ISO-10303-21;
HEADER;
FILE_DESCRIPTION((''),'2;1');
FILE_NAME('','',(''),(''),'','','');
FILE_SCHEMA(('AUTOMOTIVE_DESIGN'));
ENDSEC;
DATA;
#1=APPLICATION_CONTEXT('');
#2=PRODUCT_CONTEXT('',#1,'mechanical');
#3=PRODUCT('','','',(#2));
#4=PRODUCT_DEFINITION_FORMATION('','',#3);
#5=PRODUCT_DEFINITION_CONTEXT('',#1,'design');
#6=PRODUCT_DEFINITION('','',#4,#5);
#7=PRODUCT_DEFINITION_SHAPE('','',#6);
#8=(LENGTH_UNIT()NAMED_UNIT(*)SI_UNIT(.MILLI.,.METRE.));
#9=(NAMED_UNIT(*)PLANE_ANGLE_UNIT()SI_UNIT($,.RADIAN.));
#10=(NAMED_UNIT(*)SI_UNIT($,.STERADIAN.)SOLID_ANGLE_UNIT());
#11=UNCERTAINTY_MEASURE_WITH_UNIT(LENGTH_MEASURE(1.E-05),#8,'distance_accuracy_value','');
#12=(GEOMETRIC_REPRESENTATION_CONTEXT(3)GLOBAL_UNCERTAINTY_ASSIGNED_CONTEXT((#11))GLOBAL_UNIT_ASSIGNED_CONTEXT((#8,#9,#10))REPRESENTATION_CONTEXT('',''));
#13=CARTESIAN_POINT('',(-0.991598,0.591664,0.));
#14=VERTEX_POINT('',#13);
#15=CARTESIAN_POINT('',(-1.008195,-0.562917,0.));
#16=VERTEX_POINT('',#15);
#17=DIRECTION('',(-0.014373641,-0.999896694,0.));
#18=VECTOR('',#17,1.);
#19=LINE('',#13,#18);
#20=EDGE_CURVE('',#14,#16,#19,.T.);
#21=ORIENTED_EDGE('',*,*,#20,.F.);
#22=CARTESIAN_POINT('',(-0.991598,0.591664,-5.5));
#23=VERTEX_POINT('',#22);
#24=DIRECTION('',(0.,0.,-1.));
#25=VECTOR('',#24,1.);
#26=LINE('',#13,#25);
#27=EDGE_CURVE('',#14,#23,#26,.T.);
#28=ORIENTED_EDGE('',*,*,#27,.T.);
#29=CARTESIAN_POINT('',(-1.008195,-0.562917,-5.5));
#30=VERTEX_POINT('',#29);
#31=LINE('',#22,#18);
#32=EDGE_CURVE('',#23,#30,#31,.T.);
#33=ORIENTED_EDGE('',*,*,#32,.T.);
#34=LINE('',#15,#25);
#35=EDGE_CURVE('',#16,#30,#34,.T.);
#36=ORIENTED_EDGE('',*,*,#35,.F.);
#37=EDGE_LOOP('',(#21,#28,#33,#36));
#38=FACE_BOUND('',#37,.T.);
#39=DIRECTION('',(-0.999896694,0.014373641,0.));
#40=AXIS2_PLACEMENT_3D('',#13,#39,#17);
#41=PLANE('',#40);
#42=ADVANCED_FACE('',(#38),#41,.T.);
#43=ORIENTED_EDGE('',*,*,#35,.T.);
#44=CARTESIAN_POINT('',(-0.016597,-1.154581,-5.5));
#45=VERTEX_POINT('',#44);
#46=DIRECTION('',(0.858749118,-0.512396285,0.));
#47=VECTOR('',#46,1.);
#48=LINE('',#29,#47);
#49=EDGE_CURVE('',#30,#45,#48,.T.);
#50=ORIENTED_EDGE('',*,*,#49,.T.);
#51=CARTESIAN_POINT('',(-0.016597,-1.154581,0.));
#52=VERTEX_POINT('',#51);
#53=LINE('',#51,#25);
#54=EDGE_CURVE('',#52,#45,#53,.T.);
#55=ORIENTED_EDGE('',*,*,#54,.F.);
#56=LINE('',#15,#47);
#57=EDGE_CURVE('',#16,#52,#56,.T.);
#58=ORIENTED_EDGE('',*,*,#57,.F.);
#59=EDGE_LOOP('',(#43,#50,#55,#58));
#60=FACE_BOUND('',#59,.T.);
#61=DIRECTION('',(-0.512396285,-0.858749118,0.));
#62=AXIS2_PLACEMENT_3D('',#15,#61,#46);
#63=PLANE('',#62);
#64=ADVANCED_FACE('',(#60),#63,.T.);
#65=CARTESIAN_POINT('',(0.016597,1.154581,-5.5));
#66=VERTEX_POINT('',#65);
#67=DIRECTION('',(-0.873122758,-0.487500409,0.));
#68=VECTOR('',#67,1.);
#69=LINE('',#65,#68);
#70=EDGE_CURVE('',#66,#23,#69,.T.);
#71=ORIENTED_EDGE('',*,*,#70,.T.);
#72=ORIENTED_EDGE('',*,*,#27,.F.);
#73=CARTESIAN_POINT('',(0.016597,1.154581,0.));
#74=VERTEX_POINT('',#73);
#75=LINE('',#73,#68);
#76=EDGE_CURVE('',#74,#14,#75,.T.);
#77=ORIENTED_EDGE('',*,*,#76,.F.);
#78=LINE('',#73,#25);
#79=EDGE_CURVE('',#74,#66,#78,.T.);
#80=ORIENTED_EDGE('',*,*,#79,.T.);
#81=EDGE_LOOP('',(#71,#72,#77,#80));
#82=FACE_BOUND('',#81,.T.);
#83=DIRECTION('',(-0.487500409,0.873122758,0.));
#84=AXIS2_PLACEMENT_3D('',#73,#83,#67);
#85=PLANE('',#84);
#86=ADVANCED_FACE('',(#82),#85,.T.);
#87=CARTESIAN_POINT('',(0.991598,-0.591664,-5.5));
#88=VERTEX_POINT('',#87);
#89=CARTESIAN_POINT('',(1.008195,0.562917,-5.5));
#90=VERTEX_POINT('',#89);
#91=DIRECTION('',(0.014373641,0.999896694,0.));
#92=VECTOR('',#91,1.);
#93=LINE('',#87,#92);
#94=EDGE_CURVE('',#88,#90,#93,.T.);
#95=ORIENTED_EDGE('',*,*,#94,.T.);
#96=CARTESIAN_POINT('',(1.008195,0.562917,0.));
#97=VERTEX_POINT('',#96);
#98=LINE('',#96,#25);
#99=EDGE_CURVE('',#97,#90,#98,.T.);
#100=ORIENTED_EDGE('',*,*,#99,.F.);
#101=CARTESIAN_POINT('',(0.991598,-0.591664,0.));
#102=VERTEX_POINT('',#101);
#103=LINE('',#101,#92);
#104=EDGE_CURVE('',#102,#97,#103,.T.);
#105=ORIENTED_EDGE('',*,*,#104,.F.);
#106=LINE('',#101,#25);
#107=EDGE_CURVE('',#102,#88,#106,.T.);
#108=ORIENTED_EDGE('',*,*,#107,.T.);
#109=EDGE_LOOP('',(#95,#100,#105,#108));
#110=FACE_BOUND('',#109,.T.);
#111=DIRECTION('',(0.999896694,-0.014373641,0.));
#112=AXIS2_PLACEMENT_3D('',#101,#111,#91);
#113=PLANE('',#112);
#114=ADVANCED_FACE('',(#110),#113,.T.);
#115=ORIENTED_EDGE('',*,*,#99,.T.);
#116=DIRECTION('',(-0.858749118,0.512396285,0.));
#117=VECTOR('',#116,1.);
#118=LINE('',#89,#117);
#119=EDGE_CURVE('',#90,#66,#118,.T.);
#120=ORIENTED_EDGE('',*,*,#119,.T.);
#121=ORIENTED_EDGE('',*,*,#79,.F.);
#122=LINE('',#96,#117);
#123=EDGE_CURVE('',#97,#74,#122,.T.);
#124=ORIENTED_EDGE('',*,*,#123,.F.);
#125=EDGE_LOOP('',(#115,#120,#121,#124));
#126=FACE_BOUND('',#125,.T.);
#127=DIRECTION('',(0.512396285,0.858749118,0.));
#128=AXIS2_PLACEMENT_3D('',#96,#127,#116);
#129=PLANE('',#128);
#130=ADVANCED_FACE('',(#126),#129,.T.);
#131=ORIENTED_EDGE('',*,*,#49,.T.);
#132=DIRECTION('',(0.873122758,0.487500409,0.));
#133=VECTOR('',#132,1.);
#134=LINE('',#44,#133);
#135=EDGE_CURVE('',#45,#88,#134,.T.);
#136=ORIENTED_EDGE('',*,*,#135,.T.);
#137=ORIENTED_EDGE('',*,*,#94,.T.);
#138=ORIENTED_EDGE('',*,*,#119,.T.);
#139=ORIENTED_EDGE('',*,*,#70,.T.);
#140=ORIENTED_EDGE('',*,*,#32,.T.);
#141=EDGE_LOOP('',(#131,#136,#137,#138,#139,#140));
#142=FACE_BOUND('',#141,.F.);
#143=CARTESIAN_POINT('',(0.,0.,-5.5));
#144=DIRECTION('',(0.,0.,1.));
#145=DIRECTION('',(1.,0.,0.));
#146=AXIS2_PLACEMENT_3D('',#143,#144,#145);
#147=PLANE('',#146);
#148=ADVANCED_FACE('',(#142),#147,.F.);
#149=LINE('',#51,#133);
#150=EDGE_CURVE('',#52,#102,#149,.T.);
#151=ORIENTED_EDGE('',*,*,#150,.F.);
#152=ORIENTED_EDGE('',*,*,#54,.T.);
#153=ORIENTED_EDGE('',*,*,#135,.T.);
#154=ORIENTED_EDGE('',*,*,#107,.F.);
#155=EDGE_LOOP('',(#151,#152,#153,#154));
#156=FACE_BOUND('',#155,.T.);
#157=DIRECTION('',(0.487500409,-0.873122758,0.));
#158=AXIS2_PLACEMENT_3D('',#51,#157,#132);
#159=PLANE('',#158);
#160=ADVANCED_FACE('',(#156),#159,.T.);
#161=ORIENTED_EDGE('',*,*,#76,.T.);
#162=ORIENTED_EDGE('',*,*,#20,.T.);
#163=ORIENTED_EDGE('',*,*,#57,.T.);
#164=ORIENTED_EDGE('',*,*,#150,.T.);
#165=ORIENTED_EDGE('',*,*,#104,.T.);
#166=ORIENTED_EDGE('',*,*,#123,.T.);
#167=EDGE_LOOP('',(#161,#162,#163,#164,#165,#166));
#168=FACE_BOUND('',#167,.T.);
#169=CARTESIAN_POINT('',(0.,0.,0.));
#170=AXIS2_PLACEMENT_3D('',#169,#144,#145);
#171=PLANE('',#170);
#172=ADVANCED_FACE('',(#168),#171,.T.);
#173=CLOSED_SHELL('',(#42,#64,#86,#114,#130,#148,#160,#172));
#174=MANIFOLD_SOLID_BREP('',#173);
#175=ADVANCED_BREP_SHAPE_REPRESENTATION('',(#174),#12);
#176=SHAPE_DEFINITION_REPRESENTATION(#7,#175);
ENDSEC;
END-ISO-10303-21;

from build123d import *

# Parameters (mm, degrees)
F3_DEPTH = 5.5


# Not quite as in the source:
# - the program builds the solid bodies; features that only make, move or delete a surface that nothing else refers to are left out


with BuildPart() as f3:
    # F2 (on Top) → F3 (new body)
    with BuildSketch(Plane.XY):
        Polygon((1.0081953193, 0.5629169846), (0.0165972508, 1.1545812508), (-0.9915980685, 0.5916642662), (-1.0081953193, -0.5629169846), (-0.0165972508, -1.1545812508), (0.9915980685, -0.5916642662), align=None)
    extrude(amount=-F3_DEPTH)


solid = f3.part
